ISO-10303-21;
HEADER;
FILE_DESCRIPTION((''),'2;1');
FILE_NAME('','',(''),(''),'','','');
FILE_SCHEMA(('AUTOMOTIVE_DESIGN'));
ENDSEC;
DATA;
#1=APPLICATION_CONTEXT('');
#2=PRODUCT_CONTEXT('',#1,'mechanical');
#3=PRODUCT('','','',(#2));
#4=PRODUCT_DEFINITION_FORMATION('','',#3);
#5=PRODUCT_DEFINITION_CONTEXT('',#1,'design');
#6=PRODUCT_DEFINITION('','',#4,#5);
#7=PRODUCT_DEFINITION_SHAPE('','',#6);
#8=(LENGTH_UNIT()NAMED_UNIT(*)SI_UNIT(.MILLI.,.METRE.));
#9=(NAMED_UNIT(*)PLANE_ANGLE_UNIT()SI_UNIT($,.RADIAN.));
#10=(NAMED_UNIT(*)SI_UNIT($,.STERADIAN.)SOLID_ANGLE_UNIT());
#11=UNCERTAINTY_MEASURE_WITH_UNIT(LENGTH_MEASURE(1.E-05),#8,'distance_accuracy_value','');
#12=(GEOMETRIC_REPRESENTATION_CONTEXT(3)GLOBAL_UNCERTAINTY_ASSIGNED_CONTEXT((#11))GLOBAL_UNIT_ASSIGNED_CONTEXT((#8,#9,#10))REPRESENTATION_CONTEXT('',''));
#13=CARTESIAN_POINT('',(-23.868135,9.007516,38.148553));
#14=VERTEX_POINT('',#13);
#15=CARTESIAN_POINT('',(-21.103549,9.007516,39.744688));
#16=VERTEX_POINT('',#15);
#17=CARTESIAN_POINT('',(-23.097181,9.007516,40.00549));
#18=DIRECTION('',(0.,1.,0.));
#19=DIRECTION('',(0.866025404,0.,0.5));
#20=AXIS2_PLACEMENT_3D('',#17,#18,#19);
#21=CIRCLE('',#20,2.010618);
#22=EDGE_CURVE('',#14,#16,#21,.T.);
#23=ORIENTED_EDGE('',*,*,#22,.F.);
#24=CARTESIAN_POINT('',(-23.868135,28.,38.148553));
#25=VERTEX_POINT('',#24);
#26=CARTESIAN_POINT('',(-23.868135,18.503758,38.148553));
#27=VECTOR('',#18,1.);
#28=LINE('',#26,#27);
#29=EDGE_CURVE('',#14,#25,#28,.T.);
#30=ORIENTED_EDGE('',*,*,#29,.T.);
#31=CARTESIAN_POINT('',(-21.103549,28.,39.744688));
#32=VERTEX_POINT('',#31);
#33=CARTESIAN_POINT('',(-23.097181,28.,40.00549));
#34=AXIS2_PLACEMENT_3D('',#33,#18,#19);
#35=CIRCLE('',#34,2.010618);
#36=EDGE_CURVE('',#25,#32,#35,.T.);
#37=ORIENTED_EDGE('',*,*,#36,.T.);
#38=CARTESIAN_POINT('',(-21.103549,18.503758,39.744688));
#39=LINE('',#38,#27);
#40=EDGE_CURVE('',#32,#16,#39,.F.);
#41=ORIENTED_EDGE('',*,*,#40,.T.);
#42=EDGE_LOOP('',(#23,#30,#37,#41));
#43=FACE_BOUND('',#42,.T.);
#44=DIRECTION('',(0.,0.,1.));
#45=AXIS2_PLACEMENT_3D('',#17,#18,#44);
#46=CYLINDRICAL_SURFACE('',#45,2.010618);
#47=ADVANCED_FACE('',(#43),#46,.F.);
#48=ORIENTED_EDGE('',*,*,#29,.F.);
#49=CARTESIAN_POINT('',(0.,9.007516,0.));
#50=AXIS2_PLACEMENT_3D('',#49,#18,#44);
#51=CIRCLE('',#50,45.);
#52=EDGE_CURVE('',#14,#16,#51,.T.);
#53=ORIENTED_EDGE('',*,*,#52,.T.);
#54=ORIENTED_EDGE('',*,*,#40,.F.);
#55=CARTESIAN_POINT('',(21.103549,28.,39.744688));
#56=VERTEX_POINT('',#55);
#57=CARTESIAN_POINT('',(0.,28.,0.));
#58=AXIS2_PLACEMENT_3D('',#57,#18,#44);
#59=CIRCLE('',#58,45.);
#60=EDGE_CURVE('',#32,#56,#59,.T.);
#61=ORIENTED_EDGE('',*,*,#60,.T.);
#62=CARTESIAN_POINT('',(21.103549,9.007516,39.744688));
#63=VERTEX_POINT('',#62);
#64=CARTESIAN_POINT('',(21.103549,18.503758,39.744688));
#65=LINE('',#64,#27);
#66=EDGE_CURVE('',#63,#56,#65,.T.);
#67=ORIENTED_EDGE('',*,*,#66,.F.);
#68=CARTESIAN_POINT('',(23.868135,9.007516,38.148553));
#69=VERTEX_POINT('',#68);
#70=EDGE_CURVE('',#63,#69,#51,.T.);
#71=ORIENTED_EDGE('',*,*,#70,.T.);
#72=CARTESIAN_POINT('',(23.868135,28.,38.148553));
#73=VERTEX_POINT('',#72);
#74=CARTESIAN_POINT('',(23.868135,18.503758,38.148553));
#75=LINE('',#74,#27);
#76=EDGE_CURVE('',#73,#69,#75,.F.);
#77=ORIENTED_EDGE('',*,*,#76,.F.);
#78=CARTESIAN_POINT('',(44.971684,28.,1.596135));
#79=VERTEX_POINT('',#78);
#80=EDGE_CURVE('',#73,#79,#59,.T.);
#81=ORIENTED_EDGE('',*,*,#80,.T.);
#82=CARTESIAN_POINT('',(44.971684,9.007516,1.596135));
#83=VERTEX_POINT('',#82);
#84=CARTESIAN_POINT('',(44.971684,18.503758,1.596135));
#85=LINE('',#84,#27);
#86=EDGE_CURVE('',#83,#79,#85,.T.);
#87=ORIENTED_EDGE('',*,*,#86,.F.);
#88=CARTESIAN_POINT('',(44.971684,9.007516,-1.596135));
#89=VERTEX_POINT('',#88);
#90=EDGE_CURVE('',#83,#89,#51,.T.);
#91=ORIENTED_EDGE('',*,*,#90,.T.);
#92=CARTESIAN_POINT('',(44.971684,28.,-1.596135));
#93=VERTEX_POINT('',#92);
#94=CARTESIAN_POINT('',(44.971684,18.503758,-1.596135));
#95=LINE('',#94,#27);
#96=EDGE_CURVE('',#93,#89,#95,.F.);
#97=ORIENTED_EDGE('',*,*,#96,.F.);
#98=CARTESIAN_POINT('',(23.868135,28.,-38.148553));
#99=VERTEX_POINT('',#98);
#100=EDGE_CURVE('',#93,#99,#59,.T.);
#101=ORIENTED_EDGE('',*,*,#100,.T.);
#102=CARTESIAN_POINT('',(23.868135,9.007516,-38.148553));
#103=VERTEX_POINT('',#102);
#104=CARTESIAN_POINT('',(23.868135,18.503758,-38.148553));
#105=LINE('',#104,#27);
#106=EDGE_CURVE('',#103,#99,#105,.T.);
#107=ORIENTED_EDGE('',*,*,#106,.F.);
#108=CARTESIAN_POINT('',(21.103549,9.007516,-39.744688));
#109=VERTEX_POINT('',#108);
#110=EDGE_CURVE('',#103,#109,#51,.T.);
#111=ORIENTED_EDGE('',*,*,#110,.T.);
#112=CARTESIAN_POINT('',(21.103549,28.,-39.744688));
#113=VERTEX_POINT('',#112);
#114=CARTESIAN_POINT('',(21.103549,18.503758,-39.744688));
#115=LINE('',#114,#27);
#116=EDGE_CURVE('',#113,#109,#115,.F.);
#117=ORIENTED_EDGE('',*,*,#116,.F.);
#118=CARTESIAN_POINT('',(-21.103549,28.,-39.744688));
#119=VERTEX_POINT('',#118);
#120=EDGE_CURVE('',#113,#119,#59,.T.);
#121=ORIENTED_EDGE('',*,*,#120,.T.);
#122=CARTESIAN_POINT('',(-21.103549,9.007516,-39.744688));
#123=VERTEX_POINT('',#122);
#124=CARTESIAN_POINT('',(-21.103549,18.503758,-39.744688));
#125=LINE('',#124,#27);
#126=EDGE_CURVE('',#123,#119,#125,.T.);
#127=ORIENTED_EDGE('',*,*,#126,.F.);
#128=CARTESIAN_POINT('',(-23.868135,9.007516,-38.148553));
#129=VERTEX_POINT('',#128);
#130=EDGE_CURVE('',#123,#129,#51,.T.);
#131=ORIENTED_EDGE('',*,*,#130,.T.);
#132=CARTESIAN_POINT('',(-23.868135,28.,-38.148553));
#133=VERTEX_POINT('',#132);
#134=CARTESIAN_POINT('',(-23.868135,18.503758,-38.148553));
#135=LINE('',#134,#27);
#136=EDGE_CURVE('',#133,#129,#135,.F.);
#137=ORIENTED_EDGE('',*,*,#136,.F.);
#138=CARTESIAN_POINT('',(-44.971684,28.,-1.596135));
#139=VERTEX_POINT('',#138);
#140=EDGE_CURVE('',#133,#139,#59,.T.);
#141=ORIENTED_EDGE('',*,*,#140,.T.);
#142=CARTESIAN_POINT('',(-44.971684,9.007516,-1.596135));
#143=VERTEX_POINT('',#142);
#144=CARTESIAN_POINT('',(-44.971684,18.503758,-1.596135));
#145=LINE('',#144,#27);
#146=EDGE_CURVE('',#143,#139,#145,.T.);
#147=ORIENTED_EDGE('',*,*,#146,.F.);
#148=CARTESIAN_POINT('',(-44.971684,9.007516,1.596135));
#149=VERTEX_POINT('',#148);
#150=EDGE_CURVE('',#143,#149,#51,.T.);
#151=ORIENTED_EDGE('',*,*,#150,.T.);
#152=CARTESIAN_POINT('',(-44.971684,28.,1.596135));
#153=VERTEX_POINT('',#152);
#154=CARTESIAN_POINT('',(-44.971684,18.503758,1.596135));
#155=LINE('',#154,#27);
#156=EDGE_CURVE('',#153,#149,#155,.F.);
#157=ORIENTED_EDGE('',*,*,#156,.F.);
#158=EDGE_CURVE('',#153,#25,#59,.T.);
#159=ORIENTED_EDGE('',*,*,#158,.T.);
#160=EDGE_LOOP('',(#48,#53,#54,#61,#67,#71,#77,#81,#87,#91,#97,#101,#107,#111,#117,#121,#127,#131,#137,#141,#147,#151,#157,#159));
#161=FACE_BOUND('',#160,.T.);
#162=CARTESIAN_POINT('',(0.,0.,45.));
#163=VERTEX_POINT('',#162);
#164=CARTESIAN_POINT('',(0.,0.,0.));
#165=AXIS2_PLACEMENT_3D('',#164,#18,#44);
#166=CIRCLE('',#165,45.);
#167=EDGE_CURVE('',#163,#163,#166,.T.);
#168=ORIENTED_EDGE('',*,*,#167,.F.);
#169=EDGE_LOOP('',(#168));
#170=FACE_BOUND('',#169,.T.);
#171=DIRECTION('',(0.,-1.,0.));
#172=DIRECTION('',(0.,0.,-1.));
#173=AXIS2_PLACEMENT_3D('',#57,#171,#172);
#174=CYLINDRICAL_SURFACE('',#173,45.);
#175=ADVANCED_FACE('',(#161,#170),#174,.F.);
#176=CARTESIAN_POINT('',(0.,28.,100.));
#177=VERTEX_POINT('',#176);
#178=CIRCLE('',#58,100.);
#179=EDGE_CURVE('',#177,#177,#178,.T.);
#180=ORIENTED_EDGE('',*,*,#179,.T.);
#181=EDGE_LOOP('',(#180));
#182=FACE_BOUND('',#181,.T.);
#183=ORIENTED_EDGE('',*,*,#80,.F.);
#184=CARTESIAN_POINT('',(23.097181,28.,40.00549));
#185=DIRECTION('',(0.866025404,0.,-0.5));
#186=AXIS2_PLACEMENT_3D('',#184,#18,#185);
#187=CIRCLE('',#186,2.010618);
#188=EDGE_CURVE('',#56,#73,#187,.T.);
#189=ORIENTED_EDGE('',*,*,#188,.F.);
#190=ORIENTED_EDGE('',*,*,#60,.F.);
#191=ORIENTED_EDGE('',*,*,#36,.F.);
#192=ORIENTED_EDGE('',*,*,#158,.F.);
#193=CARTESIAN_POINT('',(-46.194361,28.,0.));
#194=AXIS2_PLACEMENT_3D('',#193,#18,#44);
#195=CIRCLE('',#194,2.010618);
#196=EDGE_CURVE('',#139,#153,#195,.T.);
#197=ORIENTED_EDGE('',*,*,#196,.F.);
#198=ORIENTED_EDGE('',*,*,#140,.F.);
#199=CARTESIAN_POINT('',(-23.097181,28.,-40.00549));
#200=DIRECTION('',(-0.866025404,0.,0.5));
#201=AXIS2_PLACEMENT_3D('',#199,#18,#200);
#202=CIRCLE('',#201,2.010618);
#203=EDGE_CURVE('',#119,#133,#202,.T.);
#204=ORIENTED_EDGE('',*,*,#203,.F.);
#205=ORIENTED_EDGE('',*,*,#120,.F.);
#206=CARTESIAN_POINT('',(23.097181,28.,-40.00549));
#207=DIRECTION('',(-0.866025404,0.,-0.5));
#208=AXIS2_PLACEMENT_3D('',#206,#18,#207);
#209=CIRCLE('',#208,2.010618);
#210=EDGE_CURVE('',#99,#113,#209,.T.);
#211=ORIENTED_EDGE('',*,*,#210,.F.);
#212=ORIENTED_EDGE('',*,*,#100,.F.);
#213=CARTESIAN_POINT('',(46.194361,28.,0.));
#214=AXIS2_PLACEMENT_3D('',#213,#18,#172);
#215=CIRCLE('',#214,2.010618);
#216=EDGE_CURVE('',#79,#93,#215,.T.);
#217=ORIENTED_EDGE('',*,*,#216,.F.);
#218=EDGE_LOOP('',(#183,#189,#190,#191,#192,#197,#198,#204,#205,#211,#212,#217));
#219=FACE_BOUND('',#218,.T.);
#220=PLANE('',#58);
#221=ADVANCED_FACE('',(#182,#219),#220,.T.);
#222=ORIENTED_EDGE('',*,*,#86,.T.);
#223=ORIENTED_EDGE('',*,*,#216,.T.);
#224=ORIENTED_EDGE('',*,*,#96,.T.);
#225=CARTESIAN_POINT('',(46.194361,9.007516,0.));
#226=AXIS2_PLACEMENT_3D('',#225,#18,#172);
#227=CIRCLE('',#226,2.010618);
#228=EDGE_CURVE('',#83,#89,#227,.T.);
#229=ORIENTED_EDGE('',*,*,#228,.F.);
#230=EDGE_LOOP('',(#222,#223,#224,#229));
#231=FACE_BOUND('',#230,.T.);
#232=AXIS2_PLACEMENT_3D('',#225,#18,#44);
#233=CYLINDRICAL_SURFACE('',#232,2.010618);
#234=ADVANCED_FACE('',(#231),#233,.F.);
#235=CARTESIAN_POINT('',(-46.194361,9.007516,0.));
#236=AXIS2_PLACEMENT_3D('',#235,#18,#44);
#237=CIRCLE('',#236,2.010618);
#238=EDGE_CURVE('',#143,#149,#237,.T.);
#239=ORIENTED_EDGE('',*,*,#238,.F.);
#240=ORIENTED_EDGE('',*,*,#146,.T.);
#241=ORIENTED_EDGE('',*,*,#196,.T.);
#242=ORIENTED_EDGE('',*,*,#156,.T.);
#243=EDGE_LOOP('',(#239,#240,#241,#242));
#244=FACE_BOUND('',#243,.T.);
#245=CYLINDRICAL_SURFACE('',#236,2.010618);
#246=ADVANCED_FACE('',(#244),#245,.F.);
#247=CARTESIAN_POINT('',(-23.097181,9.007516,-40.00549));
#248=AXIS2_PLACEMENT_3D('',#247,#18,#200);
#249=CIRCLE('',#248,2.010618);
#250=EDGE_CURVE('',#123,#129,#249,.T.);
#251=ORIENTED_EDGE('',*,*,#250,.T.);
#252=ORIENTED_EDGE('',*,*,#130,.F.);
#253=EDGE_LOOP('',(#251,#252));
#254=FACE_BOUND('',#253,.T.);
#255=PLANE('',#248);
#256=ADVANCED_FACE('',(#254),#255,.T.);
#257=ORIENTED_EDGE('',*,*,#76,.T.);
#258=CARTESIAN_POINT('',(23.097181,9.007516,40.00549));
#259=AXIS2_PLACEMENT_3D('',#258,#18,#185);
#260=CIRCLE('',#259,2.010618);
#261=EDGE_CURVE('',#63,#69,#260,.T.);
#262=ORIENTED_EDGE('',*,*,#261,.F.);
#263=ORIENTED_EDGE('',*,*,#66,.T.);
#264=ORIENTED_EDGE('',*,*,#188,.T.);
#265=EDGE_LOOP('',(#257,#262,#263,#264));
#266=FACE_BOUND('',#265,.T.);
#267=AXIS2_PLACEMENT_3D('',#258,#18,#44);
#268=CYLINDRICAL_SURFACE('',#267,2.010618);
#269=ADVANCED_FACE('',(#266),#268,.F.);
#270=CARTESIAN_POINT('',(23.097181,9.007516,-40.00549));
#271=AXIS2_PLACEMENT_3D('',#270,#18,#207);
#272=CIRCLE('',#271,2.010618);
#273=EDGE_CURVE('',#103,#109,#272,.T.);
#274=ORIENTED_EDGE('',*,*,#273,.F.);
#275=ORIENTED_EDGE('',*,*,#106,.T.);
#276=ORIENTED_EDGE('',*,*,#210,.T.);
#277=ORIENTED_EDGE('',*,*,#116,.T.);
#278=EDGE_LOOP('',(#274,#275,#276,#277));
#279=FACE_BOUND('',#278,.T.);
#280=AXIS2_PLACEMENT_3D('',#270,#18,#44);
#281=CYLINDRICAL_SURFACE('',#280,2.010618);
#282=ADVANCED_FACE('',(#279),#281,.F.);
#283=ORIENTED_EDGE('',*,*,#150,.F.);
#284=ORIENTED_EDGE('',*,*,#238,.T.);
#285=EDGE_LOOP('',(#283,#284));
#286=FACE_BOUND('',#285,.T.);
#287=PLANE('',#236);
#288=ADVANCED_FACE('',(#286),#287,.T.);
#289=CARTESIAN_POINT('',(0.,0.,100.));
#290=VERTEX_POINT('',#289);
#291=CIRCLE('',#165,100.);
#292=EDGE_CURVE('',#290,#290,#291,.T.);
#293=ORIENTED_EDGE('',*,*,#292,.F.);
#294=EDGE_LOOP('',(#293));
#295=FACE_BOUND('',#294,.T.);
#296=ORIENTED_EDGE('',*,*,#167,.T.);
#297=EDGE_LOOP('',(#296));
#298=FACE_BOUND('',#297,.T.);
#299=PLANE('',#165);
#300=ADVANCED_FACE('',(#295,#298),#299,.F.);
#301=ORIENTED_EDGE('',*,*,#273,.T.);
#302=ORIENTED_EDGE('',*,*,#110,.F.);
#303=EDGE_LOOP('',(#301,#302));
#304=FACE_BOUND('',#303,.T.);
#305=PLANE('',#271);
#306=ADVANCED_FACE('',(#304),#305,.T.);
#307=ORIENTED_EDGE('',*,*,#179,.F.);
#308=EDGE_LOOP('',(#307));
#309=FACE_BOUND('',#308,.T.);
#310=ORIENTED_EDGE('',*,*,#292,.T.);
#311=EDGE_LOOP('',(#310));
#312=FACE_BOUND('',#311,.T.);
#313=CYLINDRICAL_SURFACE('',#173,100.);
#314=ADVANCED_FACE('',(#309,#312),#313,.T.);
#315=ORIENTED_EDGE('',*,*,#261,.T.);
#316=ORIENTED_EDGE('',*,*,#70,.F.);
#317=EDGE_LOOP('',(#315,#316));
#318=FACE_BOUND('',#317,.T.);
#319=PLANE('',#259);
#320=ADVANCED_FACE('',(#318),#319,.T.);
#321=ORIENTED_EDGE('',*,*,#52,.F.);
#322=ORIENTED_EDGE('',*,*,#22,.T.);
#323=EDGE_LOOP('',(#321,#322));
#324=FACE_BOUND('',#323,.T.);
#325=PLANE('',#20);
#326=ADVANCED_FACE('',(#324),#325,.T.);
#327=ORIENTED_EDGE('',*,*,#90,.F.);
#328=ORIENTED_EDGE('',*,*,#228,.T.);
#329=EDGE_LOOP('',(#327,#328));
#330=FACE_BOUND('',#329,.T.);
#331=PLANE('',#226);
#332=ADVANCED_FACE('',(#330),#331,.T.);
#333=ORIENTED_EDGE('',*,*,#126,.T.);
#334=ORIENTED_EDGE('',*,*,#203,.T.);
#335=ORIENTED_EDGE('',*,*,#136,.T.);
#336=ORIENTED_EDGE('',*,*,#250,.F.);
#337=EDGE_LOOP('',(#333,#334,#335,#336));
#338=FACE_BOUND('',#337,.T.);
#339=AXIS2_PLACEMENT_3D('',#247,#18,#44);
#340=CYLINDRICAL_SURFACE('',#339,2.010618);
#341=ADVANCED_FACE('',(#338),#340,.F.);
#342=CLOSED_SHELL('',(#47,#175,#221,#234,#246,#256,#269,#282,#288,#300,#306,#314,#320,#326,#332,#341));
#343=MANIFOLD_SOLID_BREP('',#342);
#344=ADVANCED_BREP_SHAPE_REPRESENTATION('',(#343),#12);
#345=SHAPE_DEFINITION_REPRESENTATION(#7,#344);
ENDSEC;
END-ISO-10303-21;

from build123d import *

# Parameters (mm, degrees)
SKETCH1_R           = 100
BOSS_EXTRUDE1_DEPTH = 28
SKETCH2_R           = 45
CUT_EXTRUDE1_DEPTH  = 145.166570328
SKETCH3_R           = 2.010618309
CUT_EXTRUDE2_DEPTH  = 18.992484366
CIRPATTERN1_COUNT   = 6


with BuildPart() as part:
    # Sketch1 → Boss-Extrude1 (new body)
    with BuildSketch(Plane(origin=(0, 0, 0), x_dir=(1, 0, 0), z_dir=(0, 1, 0))):
        Circle(SKETCH1_R)
    extrude(amount=BOSS_EXTRUDE1_DEPTH)

    # Sketch2 → Cut-Extrude1 (cut, through all)
    with BuildSketch(Plane(origin=(0, 0, 0), x_dir=(1, 0, 0), z_dir=(0, 1, 0))):
        Circle(SKETCH2_R)
    extrude(amount=CUT_EXTRUDE1_DEPTH, mode=Mode.SUBTRACT)

    # Sketch3 → Cut-Extrude2 (cut)
    with BuildSketch(Plane(origin=(0, 28, 0), x_dir=(1, 0, 0), z_dir=(0, 1, 0))):
        with Locations((-46.194361215, 0)):
            Circle(SKETCH3_R)
    cut_extrude2 = extrude(amount=-CUT_EXTRUDE2_DEPTH, mode=Mode.SUBTRACT)

    # CirPattern1: Cut-Extrude2 ×6 about axis
    cirpattern1_axis = Axis((0, 0, 0), (0, 1, 0))
    for i in range(1, CIRPATTERN1_COUNT):
        add(cut_extrude2.rotate(cirpattern1_axis, i * 360 / CIRPATTERN1_COUNT), mode=Mode.SUBTRACT)


solid = part.part
